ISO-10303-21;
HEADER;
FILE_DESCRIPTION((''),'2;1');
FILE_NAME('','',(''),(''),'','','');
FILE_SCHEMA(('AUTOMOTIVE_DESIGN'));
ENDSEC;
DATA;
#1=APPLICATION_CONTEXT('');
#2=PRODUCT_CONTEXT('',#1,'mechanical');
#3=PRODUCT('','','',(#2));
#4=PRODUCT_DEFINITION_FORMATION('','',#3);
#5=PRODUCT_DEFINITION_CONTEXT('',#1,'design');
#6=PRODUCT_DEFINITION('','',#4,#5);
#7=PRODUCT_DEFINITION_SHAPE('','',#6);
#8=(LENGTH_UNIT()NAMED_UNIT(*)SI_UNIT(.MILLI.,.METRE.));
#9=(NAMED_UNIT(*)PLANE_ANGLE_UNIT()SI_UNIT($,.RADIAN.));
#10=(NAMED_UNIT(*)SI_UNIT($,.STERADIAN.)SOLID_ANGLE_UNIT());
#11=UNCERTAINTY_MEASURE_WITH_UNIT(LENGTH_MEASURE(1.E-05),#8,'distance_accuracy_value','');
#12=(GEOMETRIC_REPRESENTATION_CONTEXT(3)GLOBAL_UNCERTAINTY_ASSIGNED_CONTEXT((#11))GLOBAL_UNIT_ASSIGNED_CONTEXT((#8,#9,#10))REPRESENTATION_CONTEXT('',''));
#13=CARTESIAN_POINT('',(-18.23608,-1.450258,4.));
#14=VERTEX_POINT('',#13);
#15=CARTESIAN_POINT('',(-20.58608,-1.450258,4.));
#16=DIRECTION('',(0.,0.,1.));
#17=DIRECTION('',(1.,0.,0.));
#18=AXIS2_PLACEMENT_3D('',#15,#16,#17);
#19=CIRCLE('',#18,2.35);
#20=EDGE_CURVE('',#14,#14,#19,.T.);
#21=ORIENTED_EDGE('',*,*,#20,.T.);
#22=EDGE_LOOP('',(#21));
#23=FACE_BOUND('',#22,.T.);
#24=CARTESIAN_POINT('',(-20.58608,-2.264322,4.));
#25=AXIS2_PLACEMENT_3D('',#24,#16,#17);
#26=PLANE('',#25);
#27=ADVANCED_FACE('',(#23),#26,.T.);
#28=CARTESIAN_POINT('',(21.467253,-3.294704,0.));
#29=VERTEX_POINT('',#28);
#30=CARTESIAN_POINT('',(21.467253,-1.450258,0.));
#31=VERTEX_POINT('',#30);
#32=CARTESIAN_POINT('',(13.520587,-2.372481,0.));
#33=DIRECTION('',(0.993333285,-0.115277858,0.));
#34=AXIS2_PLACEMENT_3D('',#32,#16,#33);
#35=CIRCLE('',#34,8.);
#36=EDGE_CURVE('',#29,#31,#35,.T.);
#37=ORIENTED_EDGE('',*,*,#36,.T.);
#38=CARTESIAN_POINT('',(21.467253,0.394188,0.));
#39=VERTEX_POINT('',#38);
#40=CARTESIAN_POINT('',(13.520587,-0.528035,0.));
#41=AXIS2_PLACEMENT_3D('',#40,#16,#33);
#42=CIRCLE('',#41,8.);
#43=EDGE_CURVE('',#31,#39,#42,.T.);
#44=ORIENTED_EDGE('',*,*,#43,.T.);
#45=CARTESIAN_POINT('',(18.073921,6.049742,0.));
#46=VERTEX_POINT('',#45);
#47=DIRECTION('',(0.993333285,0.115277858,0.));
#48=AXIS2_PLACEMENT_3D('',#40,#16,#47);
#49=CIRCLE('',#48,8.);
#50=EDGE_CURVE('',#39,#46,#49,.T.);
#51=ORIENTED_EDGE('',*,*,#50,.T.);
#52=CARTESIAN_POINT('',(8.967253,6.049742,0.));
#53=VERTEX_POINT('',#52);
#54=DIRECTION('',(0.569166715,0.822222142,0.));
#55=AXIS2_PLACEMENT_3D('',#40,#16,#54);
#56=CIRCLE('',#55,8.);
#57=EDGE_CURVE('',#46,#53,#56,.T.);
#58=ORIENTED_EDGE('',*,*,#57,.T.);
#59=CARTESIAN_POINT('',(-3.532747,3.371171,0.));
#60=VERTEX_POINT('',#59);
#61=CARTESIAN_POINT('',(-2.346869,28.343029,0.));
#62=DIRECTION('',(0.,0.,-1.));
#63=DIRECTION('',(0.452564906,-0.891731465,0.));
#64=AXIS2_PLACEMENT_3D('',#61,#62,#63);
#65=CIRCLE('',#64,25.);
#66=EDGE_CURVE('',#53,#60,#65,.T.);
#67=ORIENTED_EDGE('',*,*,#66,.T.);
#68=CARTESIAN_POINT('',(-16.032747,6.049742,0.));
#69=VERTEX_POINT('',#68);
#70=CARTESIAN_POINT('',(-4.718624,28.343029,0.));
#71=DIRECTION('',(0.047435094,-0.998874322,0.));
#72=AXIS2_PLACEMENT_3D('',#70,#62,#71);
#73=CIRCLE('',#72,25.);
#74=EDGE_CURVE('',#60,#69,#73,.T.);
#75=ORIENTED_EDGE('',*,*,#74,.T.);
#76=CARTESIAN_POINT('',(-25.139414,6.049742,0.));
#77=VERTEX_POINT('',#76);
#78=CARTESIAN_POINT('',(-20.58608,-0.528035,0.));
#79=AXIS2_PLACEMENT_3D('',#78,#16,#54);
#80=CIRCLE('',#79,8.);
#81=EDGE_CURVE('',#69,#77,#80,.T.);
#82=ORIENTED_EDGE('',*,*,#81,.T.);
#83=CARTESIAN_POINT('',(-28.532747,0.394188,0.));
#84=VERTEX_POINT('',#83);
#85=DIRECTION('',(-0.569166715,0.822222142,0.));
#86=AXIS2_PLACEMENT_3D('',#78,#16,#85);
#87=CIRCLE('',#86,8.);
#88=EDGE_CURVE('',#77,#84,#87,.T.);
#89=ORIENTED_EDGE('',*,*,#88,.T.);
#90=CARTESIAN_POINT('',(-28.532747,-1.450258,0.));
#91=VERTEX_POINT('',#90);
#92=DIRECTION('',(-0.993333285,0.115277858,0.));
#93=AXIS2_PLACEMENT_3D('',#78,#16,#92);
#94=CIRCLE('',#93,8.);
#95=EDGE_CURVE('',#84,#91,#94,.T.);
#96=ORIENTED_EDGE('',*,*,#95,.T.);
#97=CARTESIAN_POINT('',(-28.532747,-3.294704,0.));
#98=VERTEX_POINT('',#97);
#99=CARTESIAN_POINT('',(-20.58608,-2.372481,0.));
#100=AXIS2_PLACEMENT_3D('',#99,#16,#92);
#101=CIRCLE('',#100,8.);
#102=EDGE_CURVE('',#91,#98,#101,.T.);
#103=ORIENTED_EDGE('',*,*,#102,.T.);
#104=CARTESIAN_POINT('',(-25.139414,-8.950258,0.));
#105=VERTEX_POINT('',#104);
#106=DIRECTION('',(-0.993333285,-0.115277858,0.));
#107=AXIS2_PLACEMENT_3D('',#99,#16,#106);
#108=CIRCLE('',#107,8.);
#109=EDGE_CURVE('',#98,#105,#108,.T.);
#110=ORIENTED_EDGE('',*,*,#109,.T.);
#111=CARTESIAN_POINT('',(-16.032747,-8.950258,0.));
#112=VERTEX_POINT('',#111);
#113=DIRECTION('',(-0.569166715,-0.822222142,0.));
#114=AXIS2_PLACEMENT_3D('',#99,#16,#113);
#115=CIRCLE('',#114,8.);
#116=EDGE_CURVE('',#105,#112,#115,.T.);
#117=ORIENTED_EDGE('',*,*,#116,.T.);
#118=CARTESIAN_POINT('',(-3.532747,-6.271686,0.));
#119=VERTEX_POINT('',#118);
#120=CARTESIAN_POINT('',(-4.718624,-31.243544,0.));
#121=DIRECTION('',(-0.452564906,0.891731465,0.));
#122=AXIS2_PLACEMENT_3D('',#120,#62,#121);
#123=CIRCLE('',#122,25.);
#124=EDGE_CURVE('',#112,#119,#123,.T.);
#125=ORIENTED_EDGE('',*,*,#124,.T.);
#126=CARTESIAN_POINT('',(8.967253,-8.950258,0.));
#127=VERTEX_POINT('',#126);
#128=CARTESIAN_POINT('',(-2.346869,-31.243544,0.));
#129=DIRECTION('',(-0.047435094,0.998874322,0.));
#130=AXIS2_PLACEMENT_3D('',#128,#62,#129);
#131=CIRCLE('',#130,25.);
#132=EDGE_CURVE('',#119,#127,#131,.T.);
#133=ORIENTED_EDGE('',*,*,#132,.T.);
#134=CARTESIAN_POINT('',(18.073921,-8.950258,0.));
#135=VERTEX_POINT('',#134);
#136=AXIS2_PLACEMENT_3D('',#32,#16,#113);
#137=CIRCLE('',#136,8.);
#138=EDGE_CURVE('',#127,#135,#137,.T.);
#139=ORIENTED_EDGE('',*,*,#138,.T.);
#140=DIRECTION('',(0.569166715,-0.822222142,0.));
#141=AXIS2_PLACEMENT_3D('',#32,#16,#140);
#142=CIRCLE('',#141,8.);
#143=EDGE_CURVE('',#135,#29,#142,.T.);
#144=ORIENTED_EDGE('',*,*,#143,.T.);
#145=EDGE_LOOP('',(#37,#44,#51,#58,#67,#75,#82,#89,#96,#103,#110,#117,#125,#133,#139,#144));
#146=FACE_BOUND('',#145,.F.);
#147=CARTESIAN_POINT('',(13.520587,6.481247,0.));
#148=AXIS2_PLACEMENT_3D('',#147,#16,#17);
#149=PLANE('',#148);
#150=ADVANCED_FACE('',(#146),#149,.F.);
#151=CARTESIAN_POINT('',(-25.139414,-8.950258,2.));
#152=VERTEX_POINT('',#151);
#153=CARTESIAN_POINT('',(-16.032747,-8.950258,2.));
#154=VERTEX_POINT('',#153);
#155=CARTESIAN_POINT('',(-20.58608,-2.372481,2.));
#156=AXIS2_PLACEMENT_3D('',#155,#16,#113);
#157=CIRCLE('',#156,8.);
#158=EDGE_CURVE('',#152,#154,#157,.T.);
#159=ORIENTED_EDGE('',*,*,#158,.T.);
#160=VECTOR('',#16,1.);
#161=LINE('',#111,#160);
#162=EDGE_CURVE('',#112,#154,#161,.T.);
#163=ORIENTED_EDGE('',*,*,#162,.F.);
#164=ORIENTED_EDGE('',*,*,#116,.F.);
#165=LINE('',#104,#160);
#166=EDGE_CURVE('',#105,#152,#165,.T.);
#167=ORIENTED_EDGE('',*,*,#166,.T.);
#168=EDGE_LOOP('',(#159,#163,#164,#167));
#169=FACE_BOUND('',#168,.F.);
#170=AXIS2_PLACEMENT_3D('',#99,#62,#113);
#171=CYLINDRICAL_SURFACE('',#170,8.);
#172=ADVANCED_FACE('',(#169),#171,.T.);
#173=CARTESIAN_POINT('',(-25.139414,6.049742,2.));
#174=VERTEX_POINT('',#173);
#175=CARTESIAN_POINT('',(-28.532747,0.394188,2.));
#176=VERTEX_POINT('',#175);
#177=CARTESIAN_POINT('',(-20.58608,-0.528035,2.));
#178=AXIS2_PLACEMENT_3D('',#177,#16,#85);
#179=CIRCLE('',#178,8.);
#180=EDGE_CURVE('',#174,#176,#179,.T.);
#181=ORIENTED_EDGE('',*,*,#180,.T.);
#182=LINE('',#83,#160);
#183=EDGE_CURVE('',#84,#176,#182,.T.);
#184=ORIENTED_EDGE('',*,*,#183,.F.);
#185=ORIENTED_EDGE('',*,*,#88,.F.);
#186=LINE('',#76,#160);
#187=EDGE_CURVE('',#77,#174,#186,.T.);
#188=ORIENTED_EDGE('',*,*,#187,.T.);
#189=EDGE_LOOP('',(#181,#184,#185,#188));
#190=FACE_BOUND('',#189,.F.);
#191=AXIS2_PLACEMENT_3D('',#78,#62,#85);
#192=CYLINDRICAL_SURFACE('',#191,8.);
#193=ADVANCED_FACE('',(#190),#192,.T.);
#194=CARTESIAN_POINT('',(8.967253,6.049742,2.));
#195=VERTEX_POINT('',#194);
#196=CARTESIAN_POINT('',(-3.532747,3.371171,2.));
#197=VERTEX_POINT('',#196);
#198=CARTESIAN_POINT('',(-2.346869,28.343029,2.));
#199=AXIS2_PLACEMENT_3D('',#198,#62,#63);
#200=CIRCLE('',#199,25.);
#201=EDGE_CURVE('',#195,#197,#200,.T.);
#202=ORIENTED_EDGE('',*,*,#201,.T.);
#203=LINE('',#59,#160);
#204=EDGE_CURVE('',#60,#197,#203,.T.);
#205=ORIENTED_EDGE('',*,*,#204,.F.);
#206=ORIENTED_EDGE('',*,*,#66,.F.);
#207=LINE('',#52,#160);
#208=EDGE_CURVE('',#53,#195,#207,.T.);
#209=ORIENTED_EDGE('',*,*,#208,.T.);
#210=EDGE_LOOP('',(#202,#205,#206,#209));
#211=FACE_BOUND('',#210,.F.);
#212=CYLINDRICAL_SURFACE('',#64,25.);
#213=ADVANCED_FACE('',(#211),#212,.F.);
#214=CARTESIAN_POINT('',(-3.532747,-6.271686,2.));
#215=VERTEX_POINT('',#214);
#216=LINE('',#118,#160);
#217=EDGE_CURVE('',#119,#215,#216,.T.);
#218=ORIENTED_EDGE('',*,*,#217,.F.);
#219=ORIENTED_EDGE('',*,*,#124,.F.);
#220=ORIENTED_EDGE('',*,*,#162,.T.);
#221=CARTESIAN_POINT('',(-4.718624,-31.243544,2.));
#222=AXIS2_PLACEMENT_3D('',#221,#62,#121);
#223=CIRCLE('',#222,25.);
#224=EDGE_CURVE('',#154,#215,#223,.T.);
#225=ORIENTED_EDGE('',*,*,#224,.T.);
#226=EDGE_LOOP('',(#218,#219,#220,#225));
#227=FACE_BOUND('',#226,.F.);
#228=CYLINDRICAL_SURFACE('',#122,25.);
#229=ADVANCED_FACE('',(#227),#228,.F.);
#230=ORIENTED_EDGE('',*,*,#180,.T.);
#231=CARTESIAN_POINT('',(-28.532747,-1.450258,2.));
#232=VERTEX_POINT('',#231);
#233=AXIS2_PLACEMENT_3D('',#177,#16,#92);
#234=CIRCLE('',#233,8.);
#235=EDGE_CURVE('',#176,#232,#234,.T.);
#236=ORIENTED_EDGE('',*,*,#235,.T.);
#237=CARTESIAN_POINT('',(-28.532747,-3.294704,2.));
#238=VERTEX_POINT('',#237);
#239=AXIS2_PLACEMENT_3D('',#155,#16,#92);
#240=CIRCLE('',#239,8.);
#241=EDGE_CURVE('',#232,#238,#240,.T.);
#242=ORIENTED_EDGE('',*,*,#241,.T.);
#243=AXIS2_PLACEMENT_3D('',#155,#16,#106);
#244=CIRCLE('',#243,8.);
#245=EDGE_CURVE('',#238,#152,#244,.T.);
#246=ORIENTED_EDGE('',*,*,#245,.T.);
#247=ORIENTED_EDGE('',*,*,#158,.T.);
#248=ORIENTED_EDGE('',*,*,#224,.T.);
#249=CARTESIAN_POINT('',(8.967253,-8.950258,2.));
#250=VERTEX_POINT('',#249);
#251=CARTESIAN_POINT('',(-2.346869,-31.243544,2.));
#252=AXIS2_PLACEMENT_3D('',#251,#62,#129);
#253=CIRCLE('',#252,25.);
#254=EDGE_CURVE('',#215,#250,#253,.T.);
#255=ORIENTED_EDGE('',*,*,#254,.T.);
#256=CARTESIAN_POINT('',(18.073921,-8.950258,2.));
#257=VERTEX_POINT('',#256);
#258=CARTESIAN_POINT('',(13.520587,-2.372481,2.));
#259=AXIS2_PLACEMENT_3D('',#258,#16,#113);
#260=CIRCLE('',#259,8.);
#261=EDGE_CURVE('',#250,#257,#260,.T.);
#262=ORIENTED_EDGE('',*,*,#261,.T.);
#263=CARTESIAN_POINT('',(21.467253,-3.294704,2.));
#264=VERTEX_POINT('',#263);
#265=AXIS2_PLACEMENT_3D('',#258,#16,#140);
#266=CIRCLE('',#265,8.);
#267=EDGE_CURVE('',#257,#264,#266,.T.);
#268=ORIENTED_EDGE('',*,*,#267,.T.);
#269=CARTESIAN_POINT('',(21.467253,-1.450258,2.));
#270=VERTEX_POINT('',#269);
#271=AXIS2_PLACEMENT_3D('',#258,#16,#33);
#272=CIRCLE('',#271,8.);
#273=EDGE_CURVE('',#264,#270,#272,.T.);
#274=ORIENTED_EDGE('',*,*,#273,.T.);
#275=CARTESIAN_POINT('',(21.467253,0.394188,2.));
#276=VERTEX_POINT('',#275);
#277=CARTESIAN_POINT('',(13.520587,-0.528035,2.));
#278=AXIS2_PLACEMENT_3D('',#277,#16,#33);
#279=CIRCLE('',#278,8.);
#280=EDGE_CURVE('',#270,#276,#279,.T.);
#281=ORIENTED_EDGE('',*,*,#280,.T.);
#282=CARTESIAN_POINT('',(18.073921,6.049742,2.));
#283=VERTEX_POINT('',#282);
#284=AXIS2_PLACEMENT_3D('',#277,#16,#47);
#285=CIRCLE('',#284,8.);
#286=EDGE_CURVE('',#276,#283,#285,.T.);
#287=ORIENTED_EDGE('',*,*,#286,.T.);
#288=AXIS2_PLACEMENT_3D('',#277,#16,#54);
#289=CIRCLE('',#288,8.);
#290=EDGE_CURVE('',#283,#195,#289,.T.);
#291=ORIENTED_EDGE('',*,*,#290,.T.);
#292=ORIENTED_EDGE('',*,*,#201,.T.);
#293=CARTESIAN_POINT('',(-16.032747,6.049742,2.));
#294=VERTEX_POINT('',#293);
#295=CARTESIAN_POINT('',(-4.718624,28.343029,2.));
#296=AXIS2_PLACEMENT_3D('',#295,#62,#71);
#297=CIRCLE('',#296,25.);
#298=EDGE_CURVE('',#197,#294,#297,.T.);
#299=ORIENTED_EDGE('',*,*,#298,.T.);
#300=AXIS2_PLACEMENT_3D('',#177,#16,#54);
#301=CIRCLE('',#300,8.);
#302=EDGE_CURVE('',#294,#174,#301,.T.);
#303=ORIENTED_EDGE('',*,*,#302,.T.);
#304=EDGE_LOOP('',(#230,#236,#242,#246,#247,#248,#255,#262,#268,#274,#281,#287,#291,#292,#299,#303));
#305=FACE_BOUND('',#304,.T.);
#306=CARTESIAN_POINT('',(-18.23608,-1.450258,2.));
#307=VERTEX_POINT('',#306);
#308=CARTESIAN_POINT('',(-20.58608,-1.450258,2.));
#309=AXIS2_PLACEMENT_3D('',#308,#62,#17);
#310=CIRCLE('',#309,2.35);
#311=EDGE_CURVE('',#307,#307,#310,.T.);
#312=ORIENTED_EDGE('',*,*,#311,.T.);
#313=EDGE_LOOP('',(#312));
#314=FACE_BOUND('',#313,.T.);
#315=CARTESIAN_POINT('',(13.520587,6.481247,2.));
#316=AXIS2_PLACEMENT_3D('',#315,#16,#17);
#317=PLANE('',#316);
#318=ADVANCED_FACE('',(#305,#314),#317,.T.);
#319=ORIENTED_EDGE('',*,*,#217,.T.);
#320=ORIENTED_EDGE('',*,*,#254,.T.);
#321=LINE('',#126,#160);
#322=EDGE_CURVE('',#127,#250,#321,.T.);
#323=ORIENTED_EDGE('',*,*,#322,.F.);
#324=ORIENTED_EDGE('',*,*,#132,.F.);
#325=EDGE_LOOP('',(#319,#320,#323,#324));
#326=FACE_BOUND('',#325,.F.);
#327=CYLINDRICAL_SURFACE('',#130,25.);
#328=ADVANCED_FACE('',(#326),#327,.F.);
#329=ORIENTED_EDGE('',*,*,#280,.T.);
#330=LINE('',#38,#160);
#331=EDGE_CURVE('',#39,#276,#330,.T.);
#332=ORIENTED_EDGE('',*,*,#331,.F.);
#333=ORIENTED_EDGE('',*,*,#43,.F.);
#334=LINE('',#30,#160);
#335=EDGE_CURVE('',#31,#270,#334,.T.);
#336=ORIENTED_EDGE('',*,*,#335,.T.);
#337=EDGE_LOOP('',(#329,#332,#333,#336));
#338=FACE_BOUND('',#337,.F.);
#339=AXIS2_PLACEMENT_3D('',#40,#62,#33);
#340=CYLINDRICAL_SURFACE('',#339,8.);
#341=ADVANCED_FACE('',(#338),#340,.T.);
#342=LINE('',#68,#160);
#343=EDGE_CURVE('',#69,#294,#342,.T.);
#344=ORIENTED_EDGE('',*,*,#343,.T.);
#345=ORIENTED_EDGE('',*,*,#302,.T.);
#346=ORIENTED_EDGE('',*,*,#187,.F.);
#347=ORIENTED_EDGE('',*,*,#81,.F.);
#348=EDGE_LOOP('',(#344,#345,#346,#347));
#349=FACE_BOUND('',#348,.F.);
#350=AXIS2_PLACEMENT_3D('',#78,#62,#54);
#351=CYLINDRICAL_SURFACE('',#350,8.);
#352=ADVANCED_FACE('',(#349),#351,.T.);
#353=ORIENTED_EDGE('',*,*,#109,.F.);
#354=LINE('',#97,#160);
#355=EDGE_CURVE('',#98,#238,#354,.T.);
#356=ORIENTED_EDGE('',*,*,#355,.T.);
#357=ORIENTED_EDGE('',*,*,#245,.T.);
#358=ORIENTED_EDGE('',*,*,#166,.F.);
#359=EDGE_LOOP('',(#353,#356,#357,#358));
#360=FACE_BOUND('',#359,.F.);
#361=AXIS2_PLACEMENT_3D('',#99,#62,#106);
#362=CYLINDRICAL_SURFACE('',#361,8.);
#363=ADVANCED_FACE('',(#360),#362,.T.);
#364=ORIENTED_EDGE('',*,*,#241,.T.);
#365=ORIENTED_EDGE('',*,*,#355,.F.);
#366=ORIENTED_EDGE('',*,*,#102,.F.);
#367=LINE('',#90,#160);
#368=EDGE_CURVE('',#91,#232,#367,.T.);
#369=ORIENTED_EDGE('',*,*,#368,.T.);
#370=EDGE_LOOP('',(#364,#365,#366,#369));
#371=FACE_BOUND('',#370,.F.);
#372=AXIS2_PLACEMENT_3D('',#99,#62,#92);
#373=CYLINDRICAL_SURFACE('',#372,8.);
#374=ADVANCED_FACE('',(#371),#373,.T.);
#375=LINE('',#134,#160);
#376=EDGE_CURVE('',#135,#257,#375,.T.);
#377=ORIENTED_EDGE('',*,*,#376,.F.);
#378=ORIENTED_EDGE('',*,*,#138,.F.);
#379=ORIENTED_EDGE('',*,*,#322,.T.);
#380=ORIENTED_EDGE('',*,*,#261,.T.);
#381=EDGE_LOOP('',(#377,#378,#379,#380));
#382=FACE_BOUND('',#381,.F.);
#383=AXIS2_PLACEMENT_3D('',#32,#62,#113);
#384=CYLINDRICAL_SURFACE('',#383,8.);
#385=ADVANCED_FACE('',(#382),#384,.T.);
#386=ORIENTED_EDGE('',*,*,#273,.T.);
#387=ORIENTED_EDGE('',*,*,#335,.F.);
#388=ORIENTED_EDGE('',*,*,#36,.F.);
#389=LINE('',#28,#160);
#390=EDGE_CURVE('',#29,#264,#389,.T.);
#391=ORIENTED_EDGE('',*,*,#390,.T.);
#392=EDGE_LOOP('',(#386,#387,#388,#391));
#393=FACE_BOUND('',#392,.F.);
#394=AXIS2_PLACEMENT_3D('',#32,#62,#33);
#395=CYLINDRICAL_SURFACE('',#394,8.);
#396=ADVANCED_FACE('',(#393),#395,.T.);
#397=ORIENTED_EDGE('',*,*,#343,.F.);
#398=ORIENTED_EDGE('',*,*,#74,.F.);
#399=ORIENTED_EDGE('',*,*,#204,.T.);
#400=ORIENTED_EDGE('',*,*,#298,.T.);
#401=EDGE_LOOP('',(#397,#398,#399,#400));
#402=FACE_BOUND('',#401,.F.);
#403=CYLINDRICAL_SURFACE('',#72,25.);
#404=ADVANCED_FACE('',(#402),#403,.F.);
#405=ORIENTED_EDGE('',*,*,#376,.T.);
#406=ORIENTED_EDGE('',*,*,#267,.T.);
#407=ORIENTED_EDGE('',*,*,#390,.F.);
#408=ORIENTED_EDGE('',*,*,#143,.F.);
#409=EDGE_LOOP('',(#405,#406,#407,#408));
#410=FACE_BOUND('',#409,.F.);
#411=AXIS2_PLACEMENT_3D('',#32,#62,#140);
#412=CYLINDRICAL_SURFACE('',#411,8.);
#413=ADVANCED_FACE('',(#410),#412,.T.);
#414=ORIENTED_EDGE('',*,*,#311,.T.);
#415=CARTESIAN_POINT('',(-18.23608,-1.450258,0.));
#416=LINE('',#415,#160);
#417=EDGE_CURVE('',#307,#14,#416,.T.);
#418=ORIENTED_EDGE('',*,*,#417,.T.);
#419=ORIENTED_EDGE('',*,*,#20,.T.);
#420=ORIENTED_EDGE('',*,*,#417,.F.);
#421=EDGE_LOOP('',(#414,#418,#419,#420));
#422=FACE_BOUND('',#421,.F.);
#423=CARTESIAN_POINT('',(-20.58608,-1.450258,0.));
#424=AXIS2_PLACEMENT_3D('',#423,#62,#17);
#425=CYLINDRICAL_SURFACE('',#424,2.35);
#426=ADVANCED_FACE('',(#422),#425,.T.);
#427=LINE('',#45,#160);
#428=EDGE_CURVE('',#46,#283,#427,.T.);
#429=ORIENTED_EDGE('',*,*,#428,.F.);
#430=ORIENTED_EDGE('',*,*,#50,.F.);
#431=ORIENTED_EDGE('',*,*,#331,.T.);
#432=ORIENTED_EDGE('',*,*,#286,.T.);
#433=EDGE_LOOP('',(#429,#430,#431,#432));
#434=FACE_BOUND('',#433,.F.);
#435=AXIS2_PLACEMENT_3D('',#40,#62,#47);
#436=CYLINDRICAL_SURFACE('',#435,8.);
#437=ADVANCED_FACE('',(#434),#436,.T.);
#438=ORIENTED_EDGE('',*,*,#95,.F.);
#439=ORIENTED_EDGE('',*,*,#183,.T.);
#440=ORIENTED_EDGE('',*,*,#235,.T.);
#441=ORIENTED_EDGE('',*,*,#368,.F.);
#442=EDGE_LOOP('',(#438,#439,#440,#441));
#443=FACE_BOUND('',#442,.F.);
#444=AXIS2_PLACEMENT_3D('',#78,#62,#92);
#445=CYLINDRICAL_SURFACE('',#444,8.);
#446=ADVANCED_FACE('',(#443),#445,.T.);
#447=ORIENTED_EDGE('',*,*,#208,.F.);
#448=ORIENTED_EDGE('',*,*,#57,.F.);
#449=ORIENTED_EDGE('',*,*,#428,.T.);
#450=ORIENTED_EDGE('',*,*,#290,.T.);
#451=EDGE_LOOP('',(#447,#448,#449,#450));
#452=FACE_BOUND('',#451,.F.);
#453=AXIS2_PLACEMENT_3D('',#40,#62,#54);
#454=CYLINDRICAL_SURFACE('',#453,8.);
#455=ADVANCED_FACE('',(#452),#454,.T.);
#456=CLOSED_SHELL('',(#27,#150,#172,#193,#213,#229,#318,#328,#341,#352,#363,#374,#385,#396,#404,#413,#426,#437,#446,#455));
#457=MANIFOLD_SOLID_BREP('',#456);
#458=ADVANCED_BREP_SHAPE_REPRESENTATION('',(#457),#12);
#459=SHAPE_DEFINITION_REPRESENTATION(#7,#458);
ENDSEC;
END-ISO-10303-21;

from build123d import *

# Parameters (mm, degrees)
F1_DEPTH = 2
F2_DEPTH = 4


with BuildPart() as f1:
    # F0 (on Top) → F1 (new body)
    with BuildSketch(Plane.XY):
        with BuildLine():
            ThreePointArc((18.0739206718, 6.0497422268), (13.5205869532, 7.4719650911), (8.9672532347, 6.0497422268))
            Line((8.9672532347, 6.0497422268), (18.0739206718, 6.0497422268))
        make_face()
        with BuildLine():
            Line((18.0739206718, 6.0497422268), (8.9672532347, 6.0497422268))
            ThreePointArc((8.9672532347, 6.0497422268), (2.8913578077, 3.8979685049), (-3.5327467653, 3.3711707982))
            Line((-3.5327467653, 3.3711707982), (-3.5327467653, -1.4502577732))
            Line((-3.5327467653, -1.4502577732), (21.4672532347, -1.4502577732))
            Line((21.4672532347, -1.4502577732), (21.4672532347, 0.3941879553))
            ThreePointArc((21.4672532347, 0.3941879553), (20.3805303589, 3.5879311345), (18.0739206718, 6.0497422268))
        make_face()
        with BuildLine():
            Line((-3.5327467653, -1.4502577732), (-3.5327467653, 3.3711707982))
            ThreePointArc((-3.5327467653, 3.3711707982), (-9.9568513384, 3.8979685049), (-16.0327467653, 6.0497422268))
            Line((-16.0327467653, 6.0497422268), (-25.1394142025, 6.0497422268))
            ThreePointArc((-25.1394142025, 6.0497422268), (-27.4460238896, 3.5879311345), (-28.5327467653, 0.3941879553))
            Line((-28.5327467653, 0.3941879553), (-28.5327467653, -1.4502577732))
            Line((-28.5327467653, -1.4502577732), (-22.9360804839, -1.4502577732))
            ThreePointArc((-22.9360804839, -1.4502577732), (-20.5860804839, 0.8997422268), (-18.2360804839, -1.4502577732))
            Line((-18.2360804839, -1.4502577732), (-3.5327467653, -1.4502577732))
        make_face()
        with BuildLine():
            Line((-25.1394142025, 6.0497422268), (-16.0327467653, 6.0497422268))
            ThreePointArc((-16.0327467653, 6.0497422268), (-20.5860804839, 7.4719650911), (-25.1394142025, 6.0497422268))
        make_face()
        with BuildLine():
            ThreePointArc((21.4672532347, -1.4502577732), (21.5205869532, -0.5280349089), (21.4672532347, 0.3941879553))
            Line((21.4672532347, 0.3941879553), (21.4672532347, -1.4502577732))
        make_face()
        with BuildLine():
            Line((21.4672532347, -1.4502577732), (-3.5327467653, -1.4502577732))
            Line((-3.5327467653, -1.4502577732), (-3.5327467653, -6.2716863446))
            ThreePointArc((-3.5327467653, -6.2716863446), (2.8913578077, -6.7984840513), (8.9672532347, -8.9502577732))
            Line((8.9672532347, -8.9502577732), (18.0739206718, -8.9502577732))
            ThreePointArc((18.0739206718, -8.9502577732), (20.3805303589, -6.4884466809), (21.4672532347, -3.2947035017))
            Line((21.4672532347, -3.2947035017), (21.4672532347, -1.4502577732))
        make_face()
        with BuildLine():
            Line((-3.5327467653, -6.2716863446), (-3.5327467653, -1.4502577732))
            Line((-3.5327467653, -1.4502577732), (-18.2360804839, -1.4502577732))
            ThreePointArc((-18.2360804839, -1.4502577732), (-20.5860804839, -3.8002577732), (-22.9360804839, -1.4502577732))
            Line((-22.9360804839, -1.4502577732), (-28.5327467653, -1.4502577732))
            Line((-28.5327467653, -1.4502577732), (-28.5327467653, -3.2947035017))
            ThreePointArc((-28.5327467653, -3.2947035017), (-27.4460238896, -6.4884466809), (-25.1394142025, -8.9502577732))
            Line((-25.1394142025, -8.9502577732), (-16.0327467653, -8.9502577732))
            ThreePointArc((-16.0327467653, -8.9502577732), (-9.9568513384, -6.7984840513), (-3.5327467653, -6.2716863446))
        make_face()
        with BuildLine():
            ThreePointArc((21.4672532347, -3.2947035017), (21.5205869532, -2.3724806375), (21.4672532347, -1.4502577732))
            Line((21.4672532347, -1.4502577732), (21.4672532347, -3.2947035017))
        make_face()
        with BuildLine():
            Line((-28.5327467653, -1.4502577732), (-28.5327467653, 0.3941879553))
            ThreePointArc((-28.5327467653, 0.3941879553), (-28.5860804839, -0.5280349089), (-28.5327467653, -1.4502577732))
        make_face()
        with BuildLine():
            ThreePointArc((-25.1394142025, -8.9502577732), (-20.5860804839, -10.3724806375), (-16.0327467653, -8.9502577732))
            Line((-16.0327467653, -8.9502577732), (-25.1394142025, -8.9502577732))
        make_face()
        with BuildLine():
            Line((18.0739206718, -8.9502577732), (8.9672532347, -8.9502577732))
            ThreePointArc((8.9672532347, -8.9502577732), (13.5205869532, -10.3724806375), (18.0739206718, -8.9502577732))
        make_face()
        with BuildLine():
            Line((-28.5327467653, -3.2947035017), (-28.5327467653, -1.4502577732))
            ThreePointArc((-28.5327467653, -1.4502577732), (-28.5860804839, -2.3724806375), (-28.5327467653, -3.2947035017))
        make_face()
    extrude(amount=F1_DEPTH)

    # F0 (on Top) → F2 (join)
    with BuildSketch(Plane.XY):
        with BuildLine():
            ThreePointArc((-22.9360804839, -1.4502577732), (-20.5860804839, -3.8002577732), (-18.2360804839, -1.4502577732))
            Line((-18.2360804839, -1.4502577732), (-20.5860804839, -1.4502577732))
            Line((-20.5860804839, -1.4502577732), (-22.9360804839, -1.4502577732))
        make_face()
        with BuildLine():
            Line((-20.5860804839, -1.4502577732), (-18.2360804839, -1.4502577732))
            ThreePointArc((-18.2360804839, -1.4502577732), (-20.5860804839, 0.8997422268), (-22.9360804839, -1.4502577732))
            Line((-22.9360804839, -1.4502577732), (-20.5860804839, -1.4502577732))
        make_face()
    extrude(amount=F2_DEPTH)


solid = f1.part
